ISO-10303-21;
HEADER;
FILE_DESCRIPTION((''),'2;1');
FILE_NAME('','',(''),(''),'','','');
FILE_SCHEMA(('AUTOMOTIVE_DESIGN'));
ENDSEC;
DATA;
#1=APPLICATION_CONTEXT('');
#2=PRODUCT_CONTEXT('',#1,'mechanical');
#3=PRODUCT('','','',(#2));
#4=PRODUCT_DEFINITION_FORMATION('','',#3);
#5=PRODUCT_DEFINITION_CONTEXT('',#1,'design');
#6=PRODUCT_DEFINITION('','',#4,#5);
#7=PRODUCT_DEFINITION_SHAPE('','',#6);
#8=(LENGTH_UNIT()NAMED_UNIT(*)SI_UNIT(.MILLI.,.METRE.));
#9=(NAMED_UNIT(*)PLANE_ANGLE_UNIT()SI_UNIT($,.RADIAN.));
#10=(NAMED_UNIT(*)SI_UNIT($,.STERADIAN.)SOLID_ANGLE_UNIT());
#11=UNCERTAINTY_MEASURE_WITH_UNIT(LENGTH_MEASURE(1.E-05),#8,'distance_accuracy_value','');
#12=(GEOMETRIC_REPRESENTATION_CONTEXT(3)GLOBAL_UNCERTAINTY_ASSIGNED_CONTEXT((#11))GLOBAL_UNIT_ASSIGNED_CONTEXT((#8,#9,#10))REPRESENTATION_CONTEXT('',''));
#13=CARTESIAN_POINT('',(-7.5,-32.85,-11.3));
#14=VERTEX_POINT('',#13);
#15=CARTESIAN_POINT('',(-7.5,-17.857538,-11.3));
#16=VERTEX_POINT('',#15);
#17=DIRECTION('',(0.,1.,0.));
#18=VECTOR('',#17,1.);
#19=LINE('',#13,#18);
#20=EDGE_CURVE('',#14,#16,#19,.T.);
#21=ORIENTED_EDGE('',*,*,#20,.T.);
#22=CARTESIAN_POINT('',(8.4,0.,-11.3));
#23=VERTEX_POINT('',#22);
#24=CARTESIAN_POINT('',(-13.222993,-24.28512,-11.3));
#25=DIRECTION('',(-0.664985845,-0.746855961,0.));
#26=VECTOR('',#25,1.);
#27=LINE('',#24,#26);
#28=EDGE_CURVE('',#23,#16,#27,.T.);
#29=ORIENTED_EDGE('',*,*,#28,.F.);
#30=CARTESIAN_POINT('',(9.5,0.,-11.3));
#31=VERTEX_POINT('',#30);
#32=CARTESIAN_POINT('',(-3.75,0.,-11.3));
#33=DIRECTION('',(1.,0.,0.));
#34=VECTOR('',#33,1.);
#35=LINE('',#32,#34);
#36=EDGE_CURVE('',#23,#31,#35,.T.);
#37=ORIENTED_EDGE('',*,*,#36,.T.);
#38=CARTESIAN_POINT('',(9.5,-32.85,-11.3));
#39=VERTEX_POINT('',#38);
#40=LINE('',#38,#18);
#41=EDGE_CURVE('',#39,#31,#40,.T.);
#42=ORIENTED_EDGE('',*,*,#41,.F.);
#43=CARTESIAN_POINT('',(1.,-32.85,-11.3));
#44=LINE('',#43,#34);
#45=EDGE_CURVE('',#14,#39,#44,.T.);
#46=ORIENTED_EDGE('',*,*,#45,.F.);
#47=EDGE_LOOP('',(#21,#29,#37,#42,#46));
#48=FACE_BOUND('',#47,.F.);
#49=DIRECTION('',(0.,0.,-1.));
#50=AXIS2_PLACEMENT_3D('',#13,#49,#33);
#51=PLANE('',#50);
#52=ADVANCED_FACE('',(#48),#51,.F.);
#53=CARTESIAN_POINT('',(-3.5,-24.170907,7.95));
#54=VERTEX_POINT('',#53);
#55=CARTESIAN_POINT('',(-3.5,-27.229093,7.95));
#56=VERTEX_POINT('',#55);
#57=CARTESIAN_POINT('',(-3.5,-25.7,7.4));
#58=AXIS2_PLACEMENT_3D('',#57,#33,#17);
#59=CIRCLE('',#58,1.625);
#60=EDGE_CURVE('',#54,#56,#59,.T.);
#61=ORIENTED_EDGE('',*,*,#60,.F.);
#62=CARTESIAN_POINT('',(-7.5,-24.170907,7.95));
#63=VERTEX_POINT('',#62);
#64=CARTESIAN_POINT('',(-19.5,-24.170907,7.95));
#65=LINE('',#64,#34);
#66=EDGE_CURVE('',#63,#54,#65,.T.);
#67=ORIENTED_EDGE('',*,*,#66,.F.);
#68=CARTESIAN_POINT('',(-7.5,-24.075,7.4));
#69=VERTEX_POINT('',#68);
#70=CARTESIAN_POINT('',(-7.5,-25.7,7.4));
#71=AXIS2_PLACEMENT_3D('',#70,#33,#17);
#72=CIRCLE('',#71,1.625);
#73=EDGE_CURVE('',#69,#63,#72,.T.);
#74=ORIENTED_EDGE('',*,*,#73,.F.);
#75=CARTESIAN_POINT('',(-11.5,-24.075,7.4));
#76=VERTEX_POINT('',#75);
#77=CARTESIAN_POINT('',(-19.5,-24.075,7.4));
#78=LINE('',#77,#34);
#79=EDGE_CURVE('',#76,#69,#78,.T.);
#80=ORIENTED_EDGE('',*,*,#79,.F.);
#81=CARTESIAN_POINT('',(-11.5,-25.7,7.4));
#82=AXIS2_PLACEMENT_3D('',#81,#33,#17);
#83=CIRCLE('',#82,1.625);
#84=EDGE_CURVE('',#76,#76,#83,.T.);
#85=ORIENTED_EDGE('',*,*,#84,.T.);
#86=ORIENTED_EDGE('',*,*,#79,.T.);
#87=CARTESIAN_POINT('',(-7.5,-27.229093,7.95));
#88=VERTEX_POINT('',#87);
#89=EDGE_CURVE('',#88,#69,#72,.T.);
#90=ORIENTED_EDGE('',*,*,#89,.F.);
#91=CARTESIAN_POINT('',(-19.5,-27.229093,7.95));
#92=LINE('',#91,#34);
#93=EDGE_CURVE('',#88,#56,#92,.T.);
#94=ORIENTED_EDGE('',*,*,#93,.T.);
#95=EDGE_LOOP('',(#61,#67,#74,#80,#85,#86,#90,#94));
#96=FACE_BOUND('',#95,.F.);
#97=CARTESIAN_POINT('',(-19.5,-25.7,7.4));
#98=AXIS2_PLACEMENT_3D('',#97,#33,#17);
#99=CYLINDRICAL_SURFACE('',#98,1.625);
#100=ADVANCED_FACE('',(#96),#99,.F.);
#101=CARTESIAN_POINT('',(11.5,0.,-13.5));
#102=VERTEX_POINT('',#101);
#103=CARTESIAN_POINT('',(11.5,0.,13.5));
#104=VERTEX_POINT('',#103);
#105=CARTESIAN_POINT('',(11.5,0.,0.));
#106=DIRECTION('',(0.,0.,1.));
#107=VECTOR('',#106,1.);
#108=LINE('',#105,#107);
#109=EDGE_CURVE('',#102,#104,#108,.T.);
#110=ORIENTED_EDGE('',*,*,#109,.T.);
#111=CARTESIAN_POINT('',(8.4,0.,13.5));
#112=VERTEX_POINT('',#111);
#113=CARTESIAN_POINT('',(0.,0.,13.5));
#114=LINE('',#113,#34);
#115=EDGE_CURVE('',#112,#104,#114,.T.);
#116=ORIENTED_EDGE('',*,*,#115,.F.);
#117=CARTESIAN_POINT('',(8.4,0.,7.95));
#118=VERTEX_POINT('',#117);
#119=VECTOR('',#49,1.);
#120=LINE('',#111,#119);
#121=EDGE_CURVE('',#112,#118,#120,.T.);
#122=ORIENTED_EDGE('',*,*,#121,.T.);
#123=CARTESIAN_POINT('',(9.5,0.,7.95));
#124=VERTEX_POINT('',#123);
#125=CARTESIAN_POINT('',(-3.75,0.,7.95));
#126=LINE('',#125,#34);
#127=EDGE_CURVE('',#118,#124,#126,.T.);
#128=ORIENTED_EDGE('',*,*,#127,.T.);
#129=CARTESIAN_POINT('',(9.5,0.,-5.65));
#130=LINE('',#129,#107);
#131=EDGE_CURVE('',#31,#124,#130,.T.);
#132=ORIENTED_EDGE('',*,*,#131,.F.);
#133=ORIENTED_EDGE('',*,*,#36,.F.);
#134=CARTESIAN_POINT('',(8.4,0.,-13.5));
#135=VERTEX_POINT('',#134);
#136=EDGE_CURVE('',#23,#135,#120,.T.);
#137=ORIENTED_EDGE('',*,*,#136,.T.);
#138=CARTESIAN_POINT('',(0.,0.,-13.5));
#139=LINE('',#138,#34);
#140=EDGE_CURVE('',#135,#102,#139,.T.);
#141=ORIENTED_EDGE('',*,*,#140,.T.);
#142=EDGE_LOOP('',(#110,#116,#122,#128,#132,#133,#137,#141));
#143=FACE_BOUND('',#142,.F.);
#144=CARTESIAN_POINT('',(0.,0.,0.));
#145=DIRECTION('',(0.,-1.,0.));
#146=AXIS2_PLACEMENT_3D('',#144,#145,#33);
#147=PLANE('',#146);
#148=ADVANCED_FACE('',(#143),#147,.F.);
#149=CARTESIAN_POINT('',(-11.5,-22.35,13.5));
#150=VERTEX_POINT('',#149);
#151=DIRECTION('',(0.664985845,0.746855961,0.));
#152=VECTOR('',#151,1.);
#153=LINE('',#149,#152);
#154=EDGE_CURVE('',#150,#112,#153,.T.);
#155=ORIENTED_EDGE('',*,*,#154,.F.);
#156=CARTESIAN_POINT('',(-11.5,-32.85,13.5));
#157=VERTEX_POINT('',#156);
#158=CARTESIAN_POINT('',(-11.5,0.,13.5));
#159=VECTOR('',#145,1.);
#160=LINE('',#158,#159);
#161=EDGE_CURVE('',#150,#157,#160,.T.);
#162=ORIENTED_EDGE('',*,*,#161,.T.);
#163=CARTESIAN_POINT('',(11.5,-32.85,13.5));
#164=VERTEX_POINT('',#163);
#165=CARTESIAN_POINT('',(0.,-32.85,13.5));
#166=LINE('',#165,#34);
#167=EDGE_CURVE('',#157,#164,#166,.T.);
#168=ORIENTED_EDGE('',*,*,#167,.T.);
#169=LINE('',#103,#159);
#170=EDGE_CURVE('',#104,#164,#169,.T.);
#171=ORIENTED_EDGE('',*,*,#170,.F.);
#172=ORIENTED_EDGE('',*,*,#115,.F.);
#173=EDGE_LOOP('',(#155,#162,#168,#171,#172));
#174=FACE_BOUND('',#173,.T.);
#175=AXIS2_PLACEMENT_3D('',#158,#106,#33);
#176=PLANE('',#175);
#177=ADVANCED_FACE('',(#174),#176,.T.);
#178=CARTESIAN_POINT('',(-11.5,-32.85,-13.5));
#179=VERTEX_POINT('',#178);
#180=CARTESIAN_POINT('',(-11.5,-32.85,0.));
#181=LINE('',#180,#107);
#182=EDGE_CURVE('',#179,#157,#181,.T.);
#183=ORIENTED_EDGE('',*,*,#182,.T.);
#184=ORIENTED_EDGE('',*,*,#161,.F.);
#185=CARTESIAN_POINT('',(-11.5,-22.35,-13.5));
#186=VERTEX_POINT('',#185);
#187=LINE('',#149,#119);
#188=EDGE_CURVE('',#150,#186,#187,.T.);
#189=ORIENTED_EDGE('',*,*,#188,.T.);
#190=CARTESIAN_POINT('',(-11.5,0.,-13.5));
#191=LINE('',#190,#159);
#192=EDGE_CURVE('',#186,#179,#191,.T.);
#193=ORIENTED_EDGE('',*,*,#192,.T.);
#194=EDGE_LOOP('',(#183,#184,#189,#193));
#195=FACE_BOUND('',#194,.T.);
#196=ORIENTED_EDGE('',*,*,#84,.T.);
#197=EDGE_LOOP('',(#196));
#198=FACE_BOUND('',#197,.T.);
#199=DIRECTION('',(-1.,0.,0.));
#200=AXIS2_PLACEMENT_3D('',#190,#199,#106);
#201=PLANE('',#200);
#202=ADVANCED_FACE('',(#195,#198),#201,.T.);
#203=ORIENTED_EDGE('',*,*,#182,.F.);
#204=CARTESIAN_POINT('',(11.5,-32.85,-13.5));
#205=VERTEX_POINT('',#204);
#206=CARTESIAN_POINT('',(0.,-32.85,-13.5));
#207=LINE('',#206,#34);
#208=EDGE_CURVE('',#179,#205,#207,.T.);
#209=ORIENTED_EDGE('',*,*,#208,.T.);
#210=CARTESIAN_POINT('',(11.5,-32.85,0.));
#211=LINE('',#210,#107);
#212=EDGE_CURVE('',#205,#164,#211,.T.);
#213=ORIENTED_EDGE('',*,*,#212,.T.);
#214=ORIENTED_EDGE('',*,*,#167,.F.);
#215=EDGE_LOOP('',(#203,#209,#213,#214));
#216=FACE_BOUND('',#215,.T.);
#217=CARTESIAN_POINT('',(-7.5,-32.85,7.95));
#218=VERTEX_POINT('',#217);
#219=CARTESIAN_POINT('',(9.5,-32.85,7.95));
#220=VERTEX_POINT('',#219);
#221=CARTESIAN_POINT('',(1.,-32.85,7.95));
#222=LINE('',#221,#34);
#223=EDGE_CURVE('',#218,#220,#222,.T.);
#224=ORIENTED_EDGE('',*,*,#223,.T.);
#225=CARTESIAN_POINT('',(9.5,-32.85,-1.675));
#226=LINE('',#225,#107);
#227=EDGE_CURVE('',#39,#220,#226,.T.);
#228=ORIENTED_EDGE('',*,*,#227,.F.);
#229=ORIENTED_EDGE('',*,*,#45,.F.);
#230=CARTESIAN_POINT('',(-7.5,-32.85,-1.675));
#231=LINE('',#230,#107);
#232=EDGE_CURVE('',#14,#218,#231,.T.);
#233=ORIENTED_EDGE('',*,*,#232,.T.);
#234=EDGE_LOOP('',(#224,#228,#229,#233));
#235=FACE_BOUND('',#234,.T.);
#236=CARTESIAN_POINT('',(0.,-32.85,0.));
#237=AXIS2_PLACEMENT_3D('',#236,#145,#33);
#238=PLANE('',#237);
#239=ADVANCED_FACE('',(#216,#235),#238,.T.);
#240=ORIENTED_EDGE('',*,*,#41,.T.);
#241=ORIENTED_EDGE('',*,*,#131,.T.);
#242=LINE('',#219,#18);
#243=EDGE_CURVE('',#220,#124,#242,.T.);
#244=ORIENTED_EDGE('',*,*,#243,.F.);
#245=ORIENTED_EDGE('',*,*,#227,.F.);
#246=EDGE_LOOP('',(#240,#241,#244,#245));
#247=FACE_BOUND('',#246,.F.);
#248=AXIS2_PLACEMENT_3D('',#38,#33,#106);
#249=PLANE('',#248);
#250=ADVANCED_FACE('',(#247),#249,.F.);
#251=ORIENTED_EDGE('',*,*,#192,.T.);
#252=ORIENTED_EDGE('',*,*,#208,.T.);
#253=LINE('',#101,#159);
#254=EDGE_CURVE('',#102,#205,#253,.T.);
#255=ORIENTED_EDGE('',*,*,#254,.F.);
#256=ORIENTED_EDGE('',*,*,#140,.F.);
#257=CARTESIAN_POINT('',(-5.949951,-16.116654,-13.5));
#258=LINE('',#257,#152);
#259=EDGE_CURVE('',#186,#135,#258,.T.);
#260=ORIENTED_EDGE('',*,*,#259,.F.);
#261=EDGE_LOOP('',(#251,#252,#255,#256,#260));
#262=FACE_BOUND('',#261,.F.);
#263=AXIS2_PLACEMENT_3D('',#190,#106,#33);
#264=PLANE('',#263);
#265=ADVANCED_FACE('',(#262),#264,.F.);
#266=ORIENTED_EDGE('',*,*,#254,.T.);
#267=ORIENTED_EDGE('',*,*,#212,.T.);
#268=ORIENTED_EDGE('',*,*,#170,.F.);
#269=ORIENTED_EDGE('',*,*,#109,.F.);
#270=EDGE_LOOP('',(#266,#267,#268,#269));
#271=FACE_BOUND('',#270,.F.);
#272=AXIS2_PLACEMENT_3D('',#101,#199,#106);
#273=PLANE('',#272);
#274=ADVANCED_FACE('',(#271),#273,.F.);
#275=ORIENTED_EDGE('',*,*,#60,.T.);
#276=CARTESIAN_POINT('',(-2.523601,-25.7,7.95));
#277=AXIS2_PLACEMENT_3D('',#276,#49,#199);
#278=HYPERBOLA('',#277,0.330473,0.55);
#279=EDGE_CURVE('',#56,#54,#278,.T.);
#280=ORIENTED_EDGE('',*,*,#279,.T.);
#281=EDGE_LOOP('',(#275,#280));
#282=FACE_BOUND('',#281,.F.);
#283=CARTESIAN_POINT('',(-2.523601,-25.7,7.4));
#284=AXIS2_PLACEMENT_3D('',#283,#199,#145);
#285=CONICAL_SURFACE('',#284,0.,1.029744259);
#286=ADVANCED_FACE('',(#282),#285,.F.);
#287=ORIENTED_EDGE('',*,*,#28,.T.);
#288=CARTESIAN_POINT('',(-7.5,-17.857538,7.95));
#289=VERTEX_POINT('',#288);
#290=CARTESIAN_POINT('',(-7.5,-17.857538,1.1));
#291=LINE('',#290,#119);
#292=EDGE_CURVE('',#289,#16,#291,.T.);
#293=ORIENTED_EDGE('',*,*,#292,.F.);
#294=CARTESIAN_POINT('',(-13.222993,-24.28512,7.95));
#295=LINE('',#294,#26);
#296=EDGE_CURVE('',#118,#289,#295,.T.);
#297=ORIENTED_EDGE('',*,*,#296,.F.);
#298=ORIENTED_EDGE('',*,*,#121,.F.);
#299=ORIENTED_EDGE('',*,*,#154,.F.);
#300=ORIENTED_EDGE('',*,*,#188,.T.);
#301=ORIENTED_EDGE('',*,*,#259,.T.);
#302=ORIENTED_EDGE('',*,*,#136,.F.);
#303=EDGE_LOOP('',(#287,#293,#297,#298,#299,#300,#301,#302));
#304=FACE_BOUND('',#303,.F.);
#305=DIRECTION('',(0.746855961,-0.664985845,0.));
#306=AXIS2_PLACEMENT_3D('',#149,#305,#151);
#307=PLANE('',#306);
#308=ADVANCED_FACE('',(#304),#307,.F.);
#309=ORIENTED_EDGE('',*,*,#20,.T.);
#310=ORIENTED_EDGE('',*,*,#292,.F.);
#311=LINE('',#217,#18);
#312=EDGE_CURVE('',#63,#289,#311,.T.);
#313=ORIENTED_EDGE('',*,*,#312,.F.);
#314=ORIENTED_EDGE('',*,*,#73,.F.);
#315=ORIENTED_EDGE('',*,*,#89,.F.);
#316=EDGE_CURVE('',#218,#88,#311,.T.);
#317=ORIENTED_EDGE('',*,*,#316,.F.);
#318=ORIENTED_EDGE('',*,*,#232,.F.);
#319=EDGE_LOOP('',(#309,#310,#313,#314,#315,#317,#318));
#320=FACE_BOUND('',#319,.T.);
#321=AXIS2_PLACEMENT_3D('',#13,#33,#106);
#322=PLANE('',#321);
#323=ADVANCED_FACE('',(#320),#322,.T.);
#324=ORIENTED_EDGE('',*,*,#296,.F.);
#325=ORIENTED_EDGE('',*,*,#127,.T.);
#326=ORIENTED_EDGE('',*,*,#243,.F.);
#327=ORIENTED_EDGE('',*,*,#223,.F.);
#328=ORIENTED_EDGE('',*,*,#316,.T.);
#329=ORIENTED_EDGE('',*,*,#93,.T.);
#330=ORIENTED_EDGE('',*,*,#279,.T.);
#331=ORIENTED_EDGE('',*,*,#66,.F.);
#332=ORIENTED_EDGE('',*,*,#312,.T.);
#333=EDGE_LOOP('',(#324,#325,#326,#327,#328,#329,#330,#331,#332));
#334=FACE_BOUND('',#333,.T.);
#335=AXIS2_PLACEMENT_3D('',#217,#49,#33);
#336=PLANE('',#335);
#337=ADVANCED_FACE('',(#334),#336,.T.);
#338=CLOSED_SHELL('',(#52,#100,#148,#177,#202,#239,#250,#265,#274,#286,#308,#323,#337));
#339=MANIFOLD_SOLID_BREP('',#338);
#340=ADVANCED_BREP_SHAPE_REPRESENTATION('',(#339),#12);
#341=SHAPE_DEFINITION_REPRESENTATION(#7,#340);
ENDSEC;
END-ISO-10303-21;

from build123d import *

# Parameters (mm, degrees)
F0_W     = 23
F0_H     = 27
F1_DEPTH = 32.85
F2_W     = 17
F2_H     = 19.25
F3_DEPTH = 32.851
F5_DEPTH = 27.001
F7_D     = 3.25
F7_DEPTH = 8
F7_TIP   = 0.9763985059


# Not quite as in the source:
# - a feature names something its author has since deleted; it is built from what else it names


with BuildPart() as f1:
    # F0 (on Front) → F1 (new body)
    with BuildSketch(Plane.XZ):
        Rectangle(F0_W, F0_H)
    extrude(amount=F1_DEPTH)

    # F2 (on face) → F3 (cut, through all)
    with BuildSketch(Plane.XZ.offset(32.85)):
        with Locations((1, -1.675)):
            Rectangle(F2_W, F2_H)
    extrude(amount=-F3_DEPTH, mode=Mode.SUBTRACT)

    # F4 (on face) → F5 (cut, through all)
    with BuildSketch(Plane.XY.offset(13.5)):
        Polygon((-11.5, -22.35), (8.4, 0), (-11.5, 0), align=None)
    extrude(amount=-F5_DEPTH, mode=Mode.SUBTRACT)

    # F7
    with Locations(Plane(origin=(-11.5, 0, 0), x_dir=(0, -1, 0), z_dir=(-1, 0, 0))):
        with Locations((25.7, 7.4)):
            Hole(F7_D / 2, depth=F7_DEPTH)
            with Locations((0, 0, -(F7_DEPTH + F7_TIP / 2))):  # 118° drill point
                Cone(0, F7_D / 2, F7_TIP, mode=Mode.SUBTRACT)


solid = f1.part
